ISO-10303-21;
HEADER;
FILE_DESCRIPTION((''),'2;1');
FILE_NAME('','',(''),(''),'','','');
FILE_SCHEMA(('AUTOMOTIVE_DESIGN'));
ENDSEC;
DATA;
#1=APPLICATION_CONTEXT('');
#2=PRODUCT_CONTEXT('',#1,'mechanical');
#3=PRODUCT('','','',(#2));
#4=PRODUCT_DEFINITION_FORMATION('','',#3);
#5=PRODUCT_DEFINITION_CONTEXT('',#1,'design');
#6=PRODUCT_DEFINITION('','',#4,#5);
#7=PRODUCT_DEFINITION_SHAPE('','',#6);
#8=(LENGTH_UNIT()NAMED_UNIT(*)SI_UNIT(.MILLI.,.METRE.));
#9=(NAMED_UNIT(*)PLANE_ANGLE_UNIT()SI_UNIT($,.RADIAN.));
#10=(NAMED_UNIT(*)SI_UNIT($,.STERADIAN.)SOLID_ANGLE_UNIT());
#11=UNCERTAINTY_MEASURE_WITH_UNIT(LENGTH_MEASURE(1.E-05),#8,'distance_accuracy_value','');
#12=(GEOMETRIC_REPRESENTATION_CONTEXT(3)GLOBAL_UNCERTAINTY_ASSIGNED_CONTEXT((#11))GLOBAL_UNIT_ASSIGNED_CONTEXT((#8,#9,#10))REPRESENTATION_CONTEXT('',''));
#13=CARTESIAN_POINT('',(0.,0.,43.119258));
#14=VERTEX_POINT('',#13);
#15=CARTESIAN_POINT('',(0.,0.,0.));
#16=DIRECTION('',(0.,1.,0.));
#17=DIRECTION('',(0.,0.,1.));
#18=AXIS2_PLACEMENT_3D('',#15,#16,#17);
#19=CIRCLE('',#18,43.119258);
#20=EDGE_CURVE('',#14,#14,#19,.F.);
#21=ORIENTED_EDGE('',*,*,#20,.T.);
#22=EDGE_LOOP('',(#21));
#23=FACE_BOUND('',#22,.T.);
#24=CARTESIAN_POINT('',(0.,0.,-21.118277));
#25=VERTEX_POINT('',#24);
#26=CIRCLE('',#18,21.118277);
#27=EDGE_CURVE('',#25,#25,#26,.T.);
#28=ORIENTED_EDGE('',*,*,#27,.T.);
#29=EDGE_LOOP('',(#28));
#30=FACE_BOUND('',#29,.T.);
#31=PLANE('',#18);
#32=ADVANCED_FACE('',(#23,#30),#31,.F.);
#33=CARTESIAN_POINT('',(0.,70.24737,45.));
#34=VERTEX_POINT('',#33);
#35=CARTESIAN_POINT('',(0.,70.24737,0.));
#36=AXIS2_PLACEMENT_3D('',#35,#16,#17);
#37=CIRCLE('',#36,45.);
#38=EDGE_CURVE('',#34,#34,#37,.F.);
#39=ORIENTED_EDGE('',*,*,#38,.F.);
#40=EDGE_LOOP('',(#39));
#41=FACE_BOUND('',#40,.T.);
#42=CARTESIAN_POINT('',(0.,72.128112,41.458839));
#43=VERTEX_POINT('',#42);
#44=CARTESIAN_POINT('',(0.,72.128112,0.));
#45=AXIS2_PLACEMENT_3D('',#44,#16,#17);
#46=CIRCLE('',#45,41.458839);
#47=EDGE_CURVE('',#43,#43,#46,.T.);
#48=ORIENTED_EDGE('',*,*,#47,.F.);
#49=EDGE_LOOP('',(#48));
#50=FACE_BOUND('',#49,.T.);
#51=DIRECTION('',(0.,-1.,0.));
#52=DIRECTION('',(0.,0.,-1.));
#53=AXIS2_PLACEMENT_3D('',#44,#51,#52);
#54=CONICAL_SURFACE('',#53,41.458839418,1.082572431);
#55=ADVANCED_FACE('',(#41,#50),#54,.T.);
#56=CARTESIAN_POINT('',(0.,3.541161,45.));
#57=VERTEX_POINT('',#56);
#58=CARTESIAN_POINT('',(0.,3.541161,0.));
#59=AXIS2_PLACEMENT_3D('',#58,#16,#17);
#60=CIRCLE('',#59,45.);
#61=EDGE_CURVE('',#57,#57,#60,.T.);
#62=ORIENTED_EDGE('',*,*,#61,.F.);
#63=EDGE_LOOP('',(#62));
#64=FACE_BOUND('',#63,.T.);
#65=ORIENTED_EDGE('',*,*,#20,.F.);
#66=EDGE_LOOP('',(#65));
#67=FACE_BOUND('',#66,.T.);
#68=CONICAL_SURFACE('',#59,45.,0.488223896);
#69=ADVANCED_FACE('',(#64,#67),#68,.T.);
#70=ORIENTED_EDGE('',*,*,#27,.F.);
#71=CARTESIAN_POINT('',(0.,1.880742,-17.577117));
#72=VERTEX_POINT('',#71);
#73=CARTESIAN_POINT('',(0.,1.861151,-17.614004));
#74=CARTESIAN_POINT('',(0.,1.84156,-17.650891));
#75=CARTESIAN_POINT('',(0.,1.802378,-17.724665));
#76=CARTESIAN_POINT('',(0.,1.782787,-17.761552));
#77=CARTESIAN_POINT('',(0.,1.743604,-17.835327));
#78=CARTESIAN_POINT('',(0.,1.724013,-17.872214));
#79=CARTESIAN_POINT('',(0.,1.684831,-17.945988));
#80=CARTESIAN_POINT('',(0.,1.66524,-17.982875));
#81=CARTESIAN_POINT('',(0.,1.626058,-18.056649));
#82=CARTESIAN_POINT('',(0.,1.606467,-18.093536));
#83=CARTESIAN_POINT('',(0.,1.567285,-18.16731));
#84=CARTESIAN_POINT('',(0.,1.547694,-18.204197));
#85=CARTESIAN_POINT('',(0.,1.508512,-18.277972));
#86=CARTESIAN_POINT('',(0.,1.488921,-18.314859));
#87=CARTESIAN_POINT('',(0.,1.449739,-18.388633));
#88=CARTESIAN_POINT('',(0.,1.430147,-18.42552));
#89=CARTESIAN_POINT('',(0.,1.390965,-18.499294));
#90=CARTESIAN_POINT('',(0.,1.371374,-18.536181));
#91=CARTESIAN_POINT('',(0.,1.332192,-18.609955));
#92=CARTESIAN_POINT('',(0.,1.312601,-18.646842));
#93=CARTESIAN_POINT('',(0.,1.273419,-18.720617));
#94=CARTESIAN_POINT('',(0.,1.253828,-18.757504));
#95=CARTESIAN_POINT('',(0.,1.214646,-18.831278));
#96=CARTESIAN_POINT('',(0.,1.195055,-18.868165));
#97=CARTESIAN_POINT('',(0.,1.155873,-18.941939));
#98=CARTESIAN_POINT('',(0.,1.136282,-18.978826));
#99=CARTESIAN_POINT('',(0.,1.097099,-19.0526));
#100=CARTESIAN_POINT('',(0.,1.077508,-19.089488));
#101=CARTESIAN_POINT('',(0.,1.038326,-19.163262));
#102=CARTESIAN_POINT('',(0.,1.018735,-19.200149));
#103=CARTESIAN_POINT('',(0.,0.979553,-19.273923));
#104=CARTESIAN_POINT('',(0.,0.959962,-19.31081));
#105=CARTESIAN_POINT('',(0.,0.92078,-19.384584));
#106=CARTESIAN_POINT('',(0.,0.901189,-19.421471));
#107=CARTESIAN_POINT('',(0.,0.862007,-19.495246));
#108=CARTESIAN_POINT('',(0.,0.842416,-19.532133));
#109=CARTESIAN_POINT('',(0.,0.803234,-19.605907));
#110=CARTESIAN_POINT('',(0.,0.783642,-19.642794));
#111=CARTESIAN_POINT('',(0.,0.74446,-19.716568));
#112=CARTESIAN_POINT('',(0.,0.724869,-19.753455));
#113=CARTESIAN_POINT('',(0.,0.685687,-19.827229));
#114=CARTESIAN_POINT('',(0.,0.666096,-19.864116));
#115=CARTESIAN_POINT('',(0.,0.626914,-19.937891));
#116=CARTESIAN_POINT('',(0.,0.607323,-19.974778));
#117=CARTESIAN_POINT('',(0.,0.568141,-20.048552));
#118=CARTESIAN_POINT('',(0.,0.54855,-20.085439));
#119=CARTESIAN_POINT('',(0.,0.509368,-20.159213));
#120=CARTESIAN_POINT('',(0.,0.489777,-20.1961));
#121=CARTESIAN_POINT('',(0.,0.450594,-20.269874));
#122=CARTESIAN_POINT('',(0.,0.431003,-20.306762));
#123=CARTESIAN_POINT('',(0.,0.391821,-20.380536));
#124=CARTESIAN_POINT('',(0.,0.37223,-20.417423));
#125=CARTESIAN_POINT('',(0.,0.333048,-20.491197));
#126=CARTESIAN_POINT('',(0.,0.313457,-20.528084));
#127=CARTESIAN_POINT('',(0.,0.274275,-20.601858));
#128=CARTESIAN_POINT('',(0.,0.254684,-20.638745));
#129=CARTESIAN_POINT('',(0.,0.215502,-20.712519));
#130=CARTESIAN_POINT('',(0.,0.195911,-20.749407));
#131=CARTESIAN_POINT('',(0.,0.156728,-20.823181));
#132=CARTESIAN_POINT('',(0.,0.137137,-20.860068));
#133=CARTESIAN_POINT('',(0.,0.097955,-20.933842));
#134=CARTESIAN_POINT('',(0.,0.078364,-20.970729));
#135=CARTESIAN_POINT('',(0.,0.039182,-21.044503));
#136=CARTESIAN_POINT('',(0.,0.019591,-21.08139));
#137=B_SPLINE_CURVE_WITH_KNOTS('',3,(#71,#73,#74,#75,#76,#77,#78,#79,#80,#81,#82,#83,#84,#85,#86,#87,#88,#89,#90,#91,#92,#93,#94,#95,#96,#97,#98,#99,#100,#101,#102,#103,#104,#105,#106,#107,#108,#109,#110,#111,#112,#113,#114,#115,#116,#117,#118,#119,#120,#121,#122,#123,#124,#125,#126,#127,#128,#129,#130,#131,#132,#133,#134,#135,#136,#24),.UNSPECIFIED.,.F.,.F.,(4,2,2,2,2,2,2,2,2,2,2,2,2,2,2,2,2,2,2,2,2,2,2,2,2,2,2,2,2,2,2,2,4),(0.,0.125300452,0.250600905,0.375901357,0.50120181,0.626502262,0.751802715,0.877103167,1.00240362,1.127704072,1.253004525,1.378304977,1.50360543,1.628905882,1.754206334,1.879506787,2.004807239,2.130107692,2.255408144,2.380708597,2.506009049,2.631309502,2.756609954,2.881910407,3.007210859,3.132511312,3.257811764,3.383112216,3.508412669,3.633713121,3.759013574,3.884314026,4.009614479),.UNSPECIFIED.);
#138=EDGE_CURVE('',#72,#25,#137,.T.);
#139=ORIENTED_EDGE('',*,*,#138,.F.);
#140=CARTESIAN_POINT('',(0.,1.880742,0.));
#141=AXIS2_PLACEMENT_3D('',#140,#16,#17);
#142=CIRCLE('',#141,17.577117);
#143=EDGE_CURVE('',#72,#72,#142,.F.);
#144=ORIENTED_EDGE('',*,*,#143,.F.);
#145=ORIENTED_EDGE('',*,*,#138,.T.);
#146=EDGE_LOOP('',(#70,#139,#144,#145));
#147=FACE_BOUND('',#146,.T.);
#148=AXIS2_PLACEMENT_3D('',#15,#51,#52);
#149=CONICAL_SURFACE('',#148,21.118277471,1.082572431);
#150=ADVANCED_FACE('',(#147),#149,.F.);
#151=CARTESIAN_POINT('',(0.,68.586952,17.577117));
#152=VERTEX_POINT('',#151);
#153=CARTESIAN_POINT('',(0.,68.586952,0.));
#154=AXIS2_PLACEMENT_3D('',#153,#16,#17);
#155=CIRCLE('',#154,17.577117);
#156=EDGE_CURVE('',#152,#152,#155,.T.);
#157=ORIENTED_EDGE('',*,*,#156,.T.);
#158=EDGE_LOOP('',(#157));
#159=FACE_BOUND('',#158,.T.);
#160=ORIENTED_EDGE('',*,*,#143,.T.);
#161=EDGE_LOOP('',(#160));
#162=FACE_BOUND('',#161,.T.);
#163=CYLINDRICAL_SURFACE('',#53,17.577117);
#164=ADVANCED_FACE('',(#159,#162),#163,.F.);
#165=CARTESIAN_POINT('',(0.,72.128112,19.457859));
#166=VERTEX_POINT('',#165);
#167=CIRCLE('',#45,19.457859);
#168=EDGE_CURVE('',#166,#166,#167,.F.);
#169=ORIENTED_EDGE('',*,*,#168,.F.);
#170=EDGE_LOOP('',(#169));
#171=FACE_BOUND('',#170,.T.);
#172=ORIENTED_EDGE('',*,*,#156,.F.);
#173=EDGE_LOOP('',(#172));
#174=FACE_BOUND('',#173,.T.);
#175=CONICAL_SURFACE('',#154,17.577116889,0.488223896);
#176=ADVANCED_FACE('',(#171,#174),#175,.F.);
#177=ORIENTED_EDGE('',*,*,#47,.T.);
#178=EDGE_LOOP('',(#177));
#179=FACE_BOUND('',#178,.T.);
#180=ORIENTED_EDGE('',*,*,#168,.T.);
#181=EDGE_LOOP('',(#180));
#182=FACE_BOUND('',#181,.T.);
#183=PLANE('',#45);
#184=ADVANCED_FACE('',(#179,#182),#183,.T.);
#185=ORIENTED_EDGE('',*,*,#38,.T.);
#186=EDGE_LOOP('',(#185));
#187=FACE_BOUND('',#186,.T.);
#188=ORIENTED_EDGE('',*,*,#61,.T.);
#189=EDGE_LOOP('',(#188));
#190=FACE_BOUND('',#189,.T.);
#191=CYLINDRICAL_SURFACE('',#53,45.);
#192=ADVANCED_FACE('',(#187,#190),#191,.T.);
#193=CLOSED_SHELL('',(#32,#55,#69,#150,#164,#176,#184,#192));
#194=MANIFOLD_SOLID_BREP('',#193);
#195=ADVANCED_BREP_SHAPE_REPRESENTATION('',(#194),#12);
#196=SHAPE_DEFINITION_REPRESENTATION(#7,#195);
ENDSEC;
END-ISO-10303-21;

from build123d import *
from OCP.BRepFilletAPI import BRepFilletAPI_MakeChamfer

# Parameters (mm, degrees)
SKETCH1_R           = 45
BOSS_EXTRUDE1_DEPTH = 72.128112293
SKETCH2_R           = 17.577116889
CUT_EXTRUDE1_DEPTH  = 97.189732212
CHAMFER1_SIZE       = 1.880741874
CHAMFER1_SIZE2      = 3.541160582


with BuildPart() as part:
    # Sketch1 → Boss-Extrude1 (new body)
    with BuildSketch(Plane(origin=(0, 0, 0), x_dir=(1, 0, 0), z_dir=(0, 1, 0))):
        Circle(SKETCH1_R)
    extrude(amount=BOSS_EXTRUDE1_DEPTH)

    # Sketch2 → Cut-Extrude1 (cut, through all)
    with BuildSketch(Plane(origin=(0, 0, 0), x_dir=(1, 0, 0), z_dir=(0, 1, 0))):
        Circle(SKETCH2_R)
    extrude(amount=CUT_EXTRUDE1_DEPTH, mode=Mode.SUBTRACT)

    # Chamfer1: one chamfer whose edges measure the first distance from different faces: ONE call of the kernel's chamfer builder (chamfer() names one face for all edges)
    chamfer1_edges_1 = [part.edges().sort_by_distance(p)[0] for p in [
        (-17.577116889, 72.128112293, 0),
    ]]
    chamfer1_side_1 = [part.faces().sort_by_distance(p)[0] for p in [
        (-43.727207794, 72.128112293, 0),
    ]]
    chamfer1_edges_2 = [part.edges().sort_by_distance(p)[0] for p in [
        (-17.577116889, 0, 0),
    ]]
    chamfer1_side_2 = [part.faces().sort_by_distance(p)[0] for p in [
        (-17.577116889, 36.064056147, 0),
    ]]
    chamfer1_edges_3 = [part.edges().sort_by_distance(p)[0] for p in [
        (-45, 0, 0),
    ]]
    chamfer1_side_3 = [part.faces().sort_by_distance(p)[0] for p in [
        (-43.727207794, 0, 0),
    ]]
    chamfer1_edges_4 = [part.edges().sort_by_distance(p)[0] for p in [
        (-45, 72.128112293, 0),
    ]]
    chamfer1_side_4 = [part.faces().sort_by_distance(p)[0] for p in [
        (-45, 36.064056147, 0),
    ]]
    chamfer1 = BRepFilletAPI_MakeChamfer(part.part.solid().wrapped)
    for e in chamfer1_edges_1:
        chamfer1.Add(CHAMFER1_SIZE, CHAMFER1_SIZE2, e.wrapped, chamfer1_side_1[0].wrapped)  # the first distance lies on this face
    for e in chamfer1_edges_2:
        chamfer1.Add(CHAMFER1_SIZE, CHAMFER1_SIZE2, e.wrapped, chamfer1_side_2[0].wrapped)  # the first distance lies on this face
    for e in chamfer1_edges_3:
        chamfer1.Add(CHAMFER1_SIZE, CHAMFER1_SIZE2, e.wrapped, chamfer1_side_3[0].wrapped)  # the first distance lies on this face
    for e in chamfer1_edges_4:
        chamfer1.Add(CHAMFER1_SIZE, CHAMFER1_SIZE2, e.wrapped, chamfer1_side_4[0].wrapped)  # the first distance lies on this face
    add(Compound.cast(chamfer1.Shape()), mode=Mode.REPLACE)


solid = part.part
